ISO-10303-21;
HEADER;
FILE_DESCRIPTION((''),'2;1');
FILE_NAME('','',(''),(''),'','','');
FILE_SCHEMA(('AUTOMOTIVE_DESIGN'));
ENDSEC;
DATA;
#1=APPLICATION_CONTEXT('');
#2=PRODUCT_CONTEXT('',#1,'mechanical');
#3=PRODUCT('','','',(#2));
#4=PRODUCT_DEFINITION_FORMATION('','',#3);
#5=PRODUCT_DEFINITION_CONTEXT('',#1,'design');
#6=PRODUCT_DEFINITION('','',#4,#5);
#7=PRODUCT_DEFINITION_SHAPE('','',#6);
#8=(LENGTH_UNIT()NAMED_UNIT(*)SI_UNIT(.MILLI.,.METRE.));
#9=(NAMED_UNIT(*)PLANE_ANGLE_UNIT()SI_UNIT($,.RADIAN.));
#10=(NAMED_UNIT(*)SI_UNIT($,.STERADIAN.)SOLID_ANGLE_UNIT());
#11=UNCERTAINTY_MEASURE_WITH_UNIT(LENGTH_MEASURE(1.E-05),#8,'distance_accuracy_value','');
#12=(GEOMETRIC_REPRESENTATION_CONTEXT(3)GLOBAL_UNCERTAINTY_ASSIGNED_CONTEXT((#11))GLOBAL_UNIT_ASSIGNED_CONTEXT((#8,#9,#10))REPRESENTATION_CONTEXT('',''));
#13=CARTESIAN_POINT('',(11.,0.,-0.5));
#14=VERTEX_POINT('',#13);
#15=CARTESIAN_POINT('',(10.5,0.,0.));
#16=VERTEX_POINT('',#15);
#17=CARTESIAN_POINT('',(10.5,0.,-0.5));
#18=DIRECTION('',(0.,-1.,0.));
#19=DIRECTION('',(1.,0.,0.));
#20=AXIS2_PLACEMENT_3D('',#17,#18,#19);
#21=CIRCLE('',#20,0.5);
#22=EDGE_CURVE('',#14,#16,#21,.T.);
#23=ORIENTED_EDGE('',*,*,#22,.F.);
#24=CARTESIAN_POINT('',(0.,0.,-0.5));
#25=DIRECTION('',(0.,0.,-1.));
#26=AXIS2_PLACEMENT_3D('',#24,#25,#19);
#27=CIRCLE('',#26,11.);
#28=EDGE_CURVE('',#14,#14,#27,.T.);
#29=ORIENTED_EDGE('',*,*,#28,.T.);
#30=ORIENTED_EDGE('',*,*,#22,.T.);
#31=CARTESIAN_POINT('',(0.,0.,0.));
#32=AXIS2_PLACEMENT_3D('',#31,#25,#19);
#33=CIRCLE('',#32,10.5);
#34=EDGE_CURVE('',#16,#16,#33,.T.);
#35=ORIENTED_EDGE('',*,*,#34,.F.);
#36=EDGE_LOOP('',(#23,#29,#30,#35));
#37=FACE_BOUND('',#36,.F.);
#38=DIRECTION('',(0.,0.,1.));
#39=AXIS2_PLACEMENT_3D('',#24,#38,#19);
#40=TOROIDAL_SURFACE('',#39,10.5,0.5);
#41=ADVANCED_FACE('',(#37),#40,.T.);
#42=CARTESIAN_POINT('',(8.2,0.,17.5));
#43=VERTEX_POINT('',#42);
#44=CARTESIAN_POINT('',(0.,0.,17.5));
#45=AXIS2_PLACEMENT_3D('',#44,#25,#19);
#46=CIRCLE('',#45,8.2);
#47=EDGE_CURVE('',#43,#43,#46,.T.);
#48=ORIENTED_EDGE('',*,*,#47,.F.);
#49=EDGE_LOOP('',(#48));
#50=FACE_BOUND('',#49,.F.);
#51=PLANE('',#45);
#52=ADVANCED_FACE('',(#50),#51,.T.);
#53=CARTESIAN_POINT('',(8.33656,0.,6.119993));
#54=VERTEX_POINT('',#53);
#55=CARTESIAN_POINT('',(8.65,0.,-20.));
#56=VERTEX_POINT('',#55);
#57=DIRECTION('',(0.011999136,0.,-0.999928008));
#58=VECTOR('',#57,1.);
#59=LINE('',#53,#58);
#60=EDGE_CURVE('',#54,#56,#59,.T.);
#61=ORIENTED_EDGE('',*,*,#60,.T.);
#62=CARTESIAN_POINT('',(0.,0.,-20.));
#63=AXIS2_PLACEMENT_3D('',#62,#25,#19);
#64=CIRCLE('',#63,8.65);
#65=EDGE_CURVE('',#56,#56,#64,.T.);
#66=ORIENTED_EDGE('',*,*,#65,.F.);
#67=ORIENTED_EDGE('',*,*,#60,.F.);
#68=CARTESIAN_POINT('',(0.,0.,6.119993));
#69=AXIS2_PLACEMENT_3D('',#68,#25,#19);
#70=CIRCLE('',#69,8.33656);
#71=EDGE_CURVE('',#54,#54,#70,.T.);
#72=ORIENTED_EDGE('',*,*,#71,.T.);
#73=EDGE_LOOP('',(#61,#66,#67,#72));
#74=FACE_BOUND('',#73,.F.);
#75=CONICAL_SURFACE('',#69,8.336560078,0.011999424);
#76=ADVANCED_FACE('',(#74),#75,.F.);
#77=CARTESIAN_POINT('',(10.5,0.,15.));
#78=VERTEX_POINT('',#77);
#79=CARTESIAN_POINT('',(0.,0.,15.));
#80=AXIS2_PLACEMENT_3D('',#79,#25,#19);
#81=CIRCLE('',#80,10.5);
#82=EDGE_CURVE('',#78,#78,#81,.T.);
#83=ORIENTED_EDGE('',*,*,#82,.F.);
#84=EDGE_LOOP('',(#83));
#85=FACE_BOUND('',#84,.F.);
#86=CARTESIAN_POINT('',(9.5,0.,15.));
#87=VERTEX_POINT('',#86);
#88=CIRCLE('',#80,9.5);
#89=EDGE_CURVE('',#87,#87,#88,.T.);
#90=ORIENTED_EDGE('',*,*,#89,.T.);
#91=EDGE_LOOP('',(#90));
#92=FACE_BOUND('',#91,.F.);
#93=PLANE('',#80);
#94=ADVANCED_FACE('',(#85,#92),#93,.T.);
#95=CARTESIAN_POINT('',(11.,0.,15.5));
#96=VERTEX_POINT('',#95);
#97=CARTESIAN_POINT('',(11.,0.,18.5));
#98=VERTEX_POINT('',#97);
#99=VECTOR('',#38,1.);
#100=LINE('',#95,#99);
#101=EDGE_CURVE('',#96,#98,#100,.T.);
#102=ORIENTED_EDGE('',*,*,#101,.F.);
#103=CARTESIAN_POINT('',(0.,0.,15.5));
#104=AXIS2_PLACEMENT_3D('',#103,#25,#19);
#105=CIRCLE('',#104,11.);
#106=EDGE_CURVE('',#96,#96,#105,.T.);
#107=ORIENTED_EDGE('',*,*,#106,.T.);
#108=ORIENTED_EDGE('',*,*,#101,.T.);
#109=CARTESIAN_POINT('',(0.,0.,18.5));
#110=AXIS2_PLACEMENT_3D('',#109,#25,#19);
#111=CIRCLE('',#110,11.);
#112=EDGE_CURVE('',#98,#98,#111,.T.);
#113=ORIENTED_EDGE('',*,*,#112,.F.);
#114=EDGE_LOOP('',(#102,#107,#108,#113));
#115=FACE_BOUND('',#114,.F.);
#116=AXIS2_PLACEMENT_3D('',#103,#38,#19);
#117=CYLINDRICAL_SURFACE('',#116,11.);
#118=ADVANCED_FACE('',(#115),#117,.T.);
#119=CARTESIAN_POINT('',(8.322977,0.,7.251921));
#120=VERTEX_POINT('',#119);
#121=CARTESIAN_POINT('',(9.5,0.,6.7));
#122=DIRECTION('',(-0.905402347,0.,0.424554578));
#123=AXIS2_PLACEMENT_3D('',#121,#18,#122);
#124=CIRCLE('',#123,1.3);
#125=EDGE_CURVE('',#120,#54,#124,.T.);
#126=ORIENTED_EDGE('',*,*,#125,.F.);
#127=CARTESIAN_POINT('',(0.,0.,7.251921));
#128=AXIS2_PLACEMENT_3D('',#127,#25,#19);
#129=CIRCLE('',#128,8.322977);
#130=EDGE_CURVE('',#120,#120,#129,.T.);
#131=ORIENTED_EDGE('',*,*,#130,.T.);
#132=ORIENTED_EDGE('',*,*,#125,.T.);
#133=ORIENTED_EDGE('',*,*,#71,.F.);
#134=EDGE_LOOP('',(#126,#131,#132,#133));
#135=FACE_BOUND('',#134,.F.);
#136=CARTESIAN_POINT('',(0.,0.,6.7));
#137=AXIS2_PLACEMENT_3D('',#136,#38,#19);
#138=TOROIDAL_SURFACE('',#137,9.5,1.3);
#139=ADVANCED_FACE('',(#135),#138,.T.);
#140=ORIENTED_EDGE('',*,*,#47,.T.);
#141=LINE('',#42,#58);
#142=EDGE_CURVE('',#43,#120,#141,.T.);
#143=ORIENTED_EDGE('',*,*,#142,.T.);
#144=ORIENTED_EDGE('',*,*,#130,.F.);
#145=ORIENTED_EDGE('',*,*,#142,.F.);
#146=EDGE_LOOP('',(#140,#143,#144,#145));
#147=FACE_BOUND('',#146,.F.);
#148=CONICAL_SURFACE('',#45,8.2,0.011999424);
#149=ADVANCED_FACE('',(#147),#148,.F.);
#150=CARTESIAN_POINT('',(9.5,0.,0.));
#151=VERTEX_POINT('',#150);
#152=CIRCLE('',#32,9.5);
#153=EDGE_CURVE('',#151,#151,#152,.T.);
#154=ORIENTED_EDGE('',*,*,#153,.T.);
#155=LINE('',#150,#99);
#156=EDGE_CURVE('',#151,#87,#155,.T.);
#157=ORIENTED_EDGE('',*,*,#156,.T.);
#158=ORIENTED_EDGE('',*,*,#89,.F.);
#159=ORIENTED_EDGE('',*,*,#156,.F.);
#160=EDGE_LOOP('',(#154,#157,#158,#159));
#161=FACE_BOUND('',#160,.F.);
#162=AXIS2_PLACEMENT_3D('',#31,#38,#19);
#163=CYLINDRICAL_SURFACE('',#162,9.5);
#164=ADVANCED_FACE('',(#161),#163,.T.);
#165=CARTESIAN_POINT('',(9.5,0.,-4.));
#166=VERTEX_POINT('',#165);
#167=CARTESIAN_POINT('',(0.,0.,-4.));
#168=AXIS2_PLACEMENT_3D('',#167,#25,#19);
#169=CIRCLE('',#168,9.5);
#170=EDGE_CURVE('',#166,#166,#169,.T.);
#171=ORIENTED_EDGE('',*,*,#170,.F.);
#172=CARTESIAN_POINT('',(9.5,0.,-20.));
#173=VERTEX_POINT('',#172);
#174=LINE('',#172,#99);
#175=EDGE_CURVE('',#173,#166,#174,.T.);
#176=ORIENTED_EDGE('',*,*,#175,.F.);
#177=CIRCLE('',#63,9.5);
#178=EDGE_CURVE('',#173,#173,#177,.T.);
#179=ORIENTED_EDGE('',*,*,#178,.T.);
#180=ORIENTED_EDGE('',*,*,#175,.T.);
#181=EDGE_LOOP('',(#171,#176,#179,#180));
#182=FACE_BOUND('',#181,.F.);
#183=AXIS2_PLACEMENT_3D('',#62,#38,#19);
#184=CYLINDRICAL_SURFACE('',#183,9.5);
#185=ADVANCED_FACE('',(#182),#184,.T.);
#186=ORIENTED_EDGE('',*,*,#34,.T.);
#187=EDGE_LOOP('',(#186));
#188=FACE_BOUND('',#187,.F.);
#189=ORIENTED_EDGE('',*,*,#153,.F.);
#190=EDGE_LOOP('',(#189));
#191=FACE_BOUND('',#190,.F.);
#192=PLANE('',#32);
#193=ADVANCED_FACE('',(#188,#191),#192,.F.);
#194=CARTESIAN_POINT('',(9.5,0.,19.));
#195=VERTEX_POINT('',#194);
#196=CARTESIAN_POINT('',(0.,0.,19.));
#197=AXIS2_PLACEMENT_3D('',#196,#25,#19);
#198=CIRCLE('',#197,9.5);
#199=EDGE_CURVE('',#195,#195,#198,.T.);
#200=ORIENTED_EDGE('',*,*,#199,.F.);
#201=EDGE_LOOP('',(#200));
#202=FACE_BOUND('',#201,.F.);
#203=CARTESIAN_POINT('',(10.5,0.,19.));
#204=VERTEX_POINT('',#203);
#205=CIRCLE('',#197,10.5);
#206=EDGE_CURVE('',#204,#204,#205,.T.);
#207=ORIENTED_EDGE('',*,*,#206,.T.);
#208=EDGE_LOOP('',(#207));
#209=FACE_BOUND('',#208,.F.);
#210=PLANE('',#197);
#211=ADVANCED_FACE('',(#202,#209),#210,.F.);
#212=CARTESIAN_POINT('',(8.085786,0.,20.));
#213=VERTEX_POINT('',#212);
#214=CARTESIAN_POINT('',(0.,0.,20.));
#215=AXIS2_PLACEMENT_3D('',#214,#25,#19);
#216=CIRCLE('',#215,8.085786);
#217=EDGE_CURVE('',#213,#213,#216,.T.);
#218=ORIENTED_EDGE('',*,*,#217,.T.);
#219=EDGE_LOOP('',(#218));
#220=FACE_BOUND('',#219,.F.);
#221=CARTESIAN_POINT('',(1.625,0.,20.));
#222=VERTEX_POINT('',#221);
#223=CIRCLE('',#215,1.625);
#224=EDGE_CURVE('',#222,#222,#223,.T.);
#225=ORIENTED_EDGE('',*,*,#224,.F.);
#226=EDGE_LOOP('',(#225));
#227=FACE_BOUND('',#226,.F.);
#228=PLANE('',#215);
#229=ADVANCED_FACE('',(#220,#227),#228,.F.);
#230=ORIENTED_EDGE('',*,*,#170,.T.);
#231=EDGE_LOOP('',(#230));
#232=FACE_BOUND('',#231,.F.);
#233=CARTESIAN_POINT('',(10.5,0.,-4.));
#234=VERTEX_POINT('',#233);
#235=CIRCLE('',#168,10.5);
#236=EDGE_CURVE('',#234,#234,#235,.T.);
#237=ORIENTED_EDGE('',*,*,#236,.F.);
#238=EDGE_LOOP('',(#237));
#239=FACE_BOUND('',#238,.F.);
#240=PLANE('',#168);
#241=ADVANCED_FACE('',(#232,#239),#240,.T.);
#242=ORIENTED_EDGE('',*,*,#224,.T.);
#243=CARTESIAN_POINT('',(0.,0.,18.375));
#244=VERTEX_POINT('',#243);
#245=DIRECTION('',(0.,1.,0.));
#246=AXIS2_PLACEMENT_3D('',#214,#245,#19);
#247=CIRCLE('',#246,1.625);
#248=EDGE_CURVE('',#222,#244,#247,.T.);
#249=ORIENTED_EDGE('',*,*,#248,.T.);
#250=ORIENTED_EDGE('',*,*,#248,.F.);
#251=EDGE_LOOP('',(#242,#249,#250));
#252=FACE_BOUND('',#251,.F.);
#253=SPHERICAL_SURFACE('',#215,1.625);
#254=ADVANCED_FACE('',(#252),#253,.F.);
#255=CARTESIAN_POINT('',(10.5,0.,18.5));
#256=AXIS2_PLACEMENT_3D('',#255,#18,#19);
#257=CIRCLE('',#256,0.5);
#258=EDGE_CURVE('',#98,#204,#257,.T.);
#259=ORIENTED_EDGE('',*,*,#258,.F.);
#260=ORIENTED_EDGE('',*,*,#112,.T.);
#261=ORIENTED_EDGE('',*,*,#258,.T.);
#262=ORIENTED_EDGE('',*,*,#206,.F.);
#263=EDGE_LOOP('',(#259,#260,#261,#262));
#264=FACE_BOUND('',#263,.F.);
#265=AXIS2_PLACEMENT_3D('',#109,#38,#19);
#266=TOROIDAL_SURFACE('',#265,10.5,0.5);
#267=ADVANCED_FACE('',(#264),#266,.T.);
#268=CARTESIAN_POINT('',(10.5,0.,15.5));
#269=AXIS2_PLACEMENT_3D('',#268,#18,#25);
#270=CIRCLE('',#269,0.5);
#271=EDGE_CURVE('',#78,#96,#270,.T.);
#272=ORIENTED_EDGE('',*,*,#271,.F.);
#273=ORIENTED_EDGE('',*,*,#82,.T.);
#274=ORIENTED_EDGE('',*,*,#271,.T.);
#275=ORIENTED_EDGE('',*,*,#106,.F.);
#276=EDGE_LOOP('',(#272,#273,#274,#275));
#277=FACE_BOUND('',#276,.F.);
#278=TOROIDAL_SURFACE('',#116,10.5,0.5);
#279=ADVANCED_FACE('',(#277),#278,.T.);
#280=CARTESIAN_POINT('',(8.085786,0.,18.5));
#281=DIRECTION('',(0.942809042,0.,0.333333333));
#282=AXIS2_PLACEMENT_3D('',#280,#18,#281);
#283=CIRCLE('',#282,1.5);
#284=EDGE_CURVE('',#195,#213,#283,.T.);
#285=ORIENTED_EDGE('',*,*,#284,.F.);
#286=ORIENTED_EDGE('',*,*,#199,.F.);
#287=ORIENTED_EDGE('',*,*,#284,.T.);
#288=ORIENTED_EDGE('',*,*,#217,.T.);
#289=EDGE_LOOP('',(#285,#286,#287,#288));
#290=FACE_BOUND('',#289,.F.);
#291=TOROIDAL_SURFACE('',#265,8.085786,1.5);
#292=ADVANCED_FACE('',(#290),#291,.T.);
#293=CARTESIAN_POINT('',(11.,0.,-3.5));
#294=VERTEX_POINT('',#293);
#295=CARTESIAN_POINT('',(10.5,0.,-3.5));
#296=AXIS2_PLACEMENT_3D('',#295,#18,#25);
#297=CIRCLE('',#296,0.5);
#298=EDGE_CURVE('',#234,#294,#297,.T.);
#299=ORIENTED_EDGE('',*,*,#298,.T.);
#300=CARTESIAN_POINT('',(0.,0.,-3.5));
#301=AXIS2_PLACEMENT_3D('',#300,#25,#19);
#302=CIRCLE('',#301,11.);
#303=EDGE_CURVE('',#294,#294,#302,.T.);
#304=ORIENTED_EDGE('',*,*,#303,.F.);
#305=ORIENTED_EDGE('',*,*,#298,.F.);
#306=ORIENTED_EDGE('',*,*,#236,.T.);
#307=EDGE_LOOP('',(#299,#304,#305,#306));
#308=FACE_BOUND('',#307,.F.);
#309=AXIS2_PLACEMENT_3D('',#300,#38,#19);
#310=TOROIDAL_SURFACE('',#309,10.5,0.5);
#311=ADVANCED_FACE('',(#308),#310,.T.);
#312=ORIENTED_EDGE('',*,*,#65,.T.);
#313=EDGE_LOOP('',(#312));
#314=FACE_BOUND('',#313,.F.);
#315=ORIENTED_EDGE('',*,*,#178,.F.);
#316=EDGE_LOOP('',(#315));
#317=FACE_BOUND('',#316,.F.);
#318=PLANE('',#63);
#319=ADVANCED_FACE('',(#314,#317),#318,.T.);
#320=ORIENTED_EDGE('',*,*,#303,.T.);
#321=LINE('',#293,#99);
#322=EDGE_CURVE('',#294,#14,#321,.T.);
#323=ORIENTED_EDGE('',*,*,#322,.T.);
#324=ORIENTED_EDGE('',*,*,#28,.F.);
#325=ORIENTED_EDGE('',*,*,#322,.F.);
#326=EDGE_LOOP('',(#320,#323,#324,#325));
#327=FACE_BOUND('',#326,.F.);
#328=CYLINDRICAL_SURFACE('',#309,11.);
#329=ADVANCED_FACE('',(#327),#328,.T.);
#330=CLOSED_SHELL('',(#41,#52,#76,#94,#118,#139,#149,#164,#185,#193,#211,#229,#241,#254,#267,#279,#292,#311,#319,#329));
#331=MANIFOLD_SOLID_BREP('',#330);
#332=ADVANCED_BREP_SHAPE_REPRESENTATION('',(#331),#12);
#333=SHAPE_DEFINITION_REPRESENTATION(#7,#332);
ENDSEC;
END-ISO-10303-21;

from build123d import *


# Not quite as in the source:
# - a fillet or chamfer that OpenCascade refuses, or shapes differently, is made with other operations: its cross-section is extruded or revolved along the edge and cut away or added


with BuildPart() as f1:
    # F0 (on Front) → F1 (revolve)
    with BuildSketch(Plane.XZ):
        with BuildLine():
            Line((9.5, 20), (1.625, 20))
            ThreePointArc((1.625, 20), (1.1490485194, 18.8509514806), (0, 18.375))
            Line((0, 18.375), (0, 17.5))
            Line((0, 17.5), (8.2, 17.5))
            Line((8.2, 17.5), (8.3229769486, 7.2519209513))
            ThreePointArc((8.3229769486, 7.2519209513), (8.2000935899, 6.6844011231), (8.3365600781, 6.1199934931))
            Line((8.3365600781, 6.1199934931), (8.65, -20))
            Line((8.65, -20), (9.5, -20))
            Line((9.5, -20), (9.5, -4))
            Line((9.5, -4), (10.5, -4))
            ThreePointArc((10.5, -4), (10.8535533906, -3.8535533906), (11, -3.5))
            Line((11, -3.5), (11, -0.5))
            ThreePointArc((11, -0.5), (10.8535533906, -0.1464466094), (10.5, 0))
            Line((10.5, 0), (9.5, 0))
            Line((9.5, 0), (9.5, 15))
            Line((9.5, 15), (10.5, 15))
            ThreePointArc((10.5, 15), (10.8535533906, 15.1464466094), (11, 15.5))
            Line((11, 15.5), (11, 18.5))
            ThreePointArc((11, 18.5), (10.8535533906, 18.8535533906), (10.5, 19))
            Line((10.5, 19), (9.5, 19))
            Line((9.5, 19), (9.5, 20))
        make_face()
    revolve(axis=Axis((0, 0, 0), (0, 0, -1)))

    # F2: fillet of radius 1.5 on 1 edges, made by hand

    # F2_s1 → F2_t2 (revolve, cut)
    with BuildSketch(Plane.XZ):
        with BuildLine():
            ThreePointArc((9.5, 19), (8.9518118414, 19.7247448714), (8.0857864376, 20))
            Line((8.0857864376, 20), (9.5, 20))
            Line((9.5, 20), (9.5, 19))
        make_face()
    revolve(axis=Axis((0, 0, 20), (0, 0, -1)), mode=Mode.SUBTRACT)


solid = f1.part
